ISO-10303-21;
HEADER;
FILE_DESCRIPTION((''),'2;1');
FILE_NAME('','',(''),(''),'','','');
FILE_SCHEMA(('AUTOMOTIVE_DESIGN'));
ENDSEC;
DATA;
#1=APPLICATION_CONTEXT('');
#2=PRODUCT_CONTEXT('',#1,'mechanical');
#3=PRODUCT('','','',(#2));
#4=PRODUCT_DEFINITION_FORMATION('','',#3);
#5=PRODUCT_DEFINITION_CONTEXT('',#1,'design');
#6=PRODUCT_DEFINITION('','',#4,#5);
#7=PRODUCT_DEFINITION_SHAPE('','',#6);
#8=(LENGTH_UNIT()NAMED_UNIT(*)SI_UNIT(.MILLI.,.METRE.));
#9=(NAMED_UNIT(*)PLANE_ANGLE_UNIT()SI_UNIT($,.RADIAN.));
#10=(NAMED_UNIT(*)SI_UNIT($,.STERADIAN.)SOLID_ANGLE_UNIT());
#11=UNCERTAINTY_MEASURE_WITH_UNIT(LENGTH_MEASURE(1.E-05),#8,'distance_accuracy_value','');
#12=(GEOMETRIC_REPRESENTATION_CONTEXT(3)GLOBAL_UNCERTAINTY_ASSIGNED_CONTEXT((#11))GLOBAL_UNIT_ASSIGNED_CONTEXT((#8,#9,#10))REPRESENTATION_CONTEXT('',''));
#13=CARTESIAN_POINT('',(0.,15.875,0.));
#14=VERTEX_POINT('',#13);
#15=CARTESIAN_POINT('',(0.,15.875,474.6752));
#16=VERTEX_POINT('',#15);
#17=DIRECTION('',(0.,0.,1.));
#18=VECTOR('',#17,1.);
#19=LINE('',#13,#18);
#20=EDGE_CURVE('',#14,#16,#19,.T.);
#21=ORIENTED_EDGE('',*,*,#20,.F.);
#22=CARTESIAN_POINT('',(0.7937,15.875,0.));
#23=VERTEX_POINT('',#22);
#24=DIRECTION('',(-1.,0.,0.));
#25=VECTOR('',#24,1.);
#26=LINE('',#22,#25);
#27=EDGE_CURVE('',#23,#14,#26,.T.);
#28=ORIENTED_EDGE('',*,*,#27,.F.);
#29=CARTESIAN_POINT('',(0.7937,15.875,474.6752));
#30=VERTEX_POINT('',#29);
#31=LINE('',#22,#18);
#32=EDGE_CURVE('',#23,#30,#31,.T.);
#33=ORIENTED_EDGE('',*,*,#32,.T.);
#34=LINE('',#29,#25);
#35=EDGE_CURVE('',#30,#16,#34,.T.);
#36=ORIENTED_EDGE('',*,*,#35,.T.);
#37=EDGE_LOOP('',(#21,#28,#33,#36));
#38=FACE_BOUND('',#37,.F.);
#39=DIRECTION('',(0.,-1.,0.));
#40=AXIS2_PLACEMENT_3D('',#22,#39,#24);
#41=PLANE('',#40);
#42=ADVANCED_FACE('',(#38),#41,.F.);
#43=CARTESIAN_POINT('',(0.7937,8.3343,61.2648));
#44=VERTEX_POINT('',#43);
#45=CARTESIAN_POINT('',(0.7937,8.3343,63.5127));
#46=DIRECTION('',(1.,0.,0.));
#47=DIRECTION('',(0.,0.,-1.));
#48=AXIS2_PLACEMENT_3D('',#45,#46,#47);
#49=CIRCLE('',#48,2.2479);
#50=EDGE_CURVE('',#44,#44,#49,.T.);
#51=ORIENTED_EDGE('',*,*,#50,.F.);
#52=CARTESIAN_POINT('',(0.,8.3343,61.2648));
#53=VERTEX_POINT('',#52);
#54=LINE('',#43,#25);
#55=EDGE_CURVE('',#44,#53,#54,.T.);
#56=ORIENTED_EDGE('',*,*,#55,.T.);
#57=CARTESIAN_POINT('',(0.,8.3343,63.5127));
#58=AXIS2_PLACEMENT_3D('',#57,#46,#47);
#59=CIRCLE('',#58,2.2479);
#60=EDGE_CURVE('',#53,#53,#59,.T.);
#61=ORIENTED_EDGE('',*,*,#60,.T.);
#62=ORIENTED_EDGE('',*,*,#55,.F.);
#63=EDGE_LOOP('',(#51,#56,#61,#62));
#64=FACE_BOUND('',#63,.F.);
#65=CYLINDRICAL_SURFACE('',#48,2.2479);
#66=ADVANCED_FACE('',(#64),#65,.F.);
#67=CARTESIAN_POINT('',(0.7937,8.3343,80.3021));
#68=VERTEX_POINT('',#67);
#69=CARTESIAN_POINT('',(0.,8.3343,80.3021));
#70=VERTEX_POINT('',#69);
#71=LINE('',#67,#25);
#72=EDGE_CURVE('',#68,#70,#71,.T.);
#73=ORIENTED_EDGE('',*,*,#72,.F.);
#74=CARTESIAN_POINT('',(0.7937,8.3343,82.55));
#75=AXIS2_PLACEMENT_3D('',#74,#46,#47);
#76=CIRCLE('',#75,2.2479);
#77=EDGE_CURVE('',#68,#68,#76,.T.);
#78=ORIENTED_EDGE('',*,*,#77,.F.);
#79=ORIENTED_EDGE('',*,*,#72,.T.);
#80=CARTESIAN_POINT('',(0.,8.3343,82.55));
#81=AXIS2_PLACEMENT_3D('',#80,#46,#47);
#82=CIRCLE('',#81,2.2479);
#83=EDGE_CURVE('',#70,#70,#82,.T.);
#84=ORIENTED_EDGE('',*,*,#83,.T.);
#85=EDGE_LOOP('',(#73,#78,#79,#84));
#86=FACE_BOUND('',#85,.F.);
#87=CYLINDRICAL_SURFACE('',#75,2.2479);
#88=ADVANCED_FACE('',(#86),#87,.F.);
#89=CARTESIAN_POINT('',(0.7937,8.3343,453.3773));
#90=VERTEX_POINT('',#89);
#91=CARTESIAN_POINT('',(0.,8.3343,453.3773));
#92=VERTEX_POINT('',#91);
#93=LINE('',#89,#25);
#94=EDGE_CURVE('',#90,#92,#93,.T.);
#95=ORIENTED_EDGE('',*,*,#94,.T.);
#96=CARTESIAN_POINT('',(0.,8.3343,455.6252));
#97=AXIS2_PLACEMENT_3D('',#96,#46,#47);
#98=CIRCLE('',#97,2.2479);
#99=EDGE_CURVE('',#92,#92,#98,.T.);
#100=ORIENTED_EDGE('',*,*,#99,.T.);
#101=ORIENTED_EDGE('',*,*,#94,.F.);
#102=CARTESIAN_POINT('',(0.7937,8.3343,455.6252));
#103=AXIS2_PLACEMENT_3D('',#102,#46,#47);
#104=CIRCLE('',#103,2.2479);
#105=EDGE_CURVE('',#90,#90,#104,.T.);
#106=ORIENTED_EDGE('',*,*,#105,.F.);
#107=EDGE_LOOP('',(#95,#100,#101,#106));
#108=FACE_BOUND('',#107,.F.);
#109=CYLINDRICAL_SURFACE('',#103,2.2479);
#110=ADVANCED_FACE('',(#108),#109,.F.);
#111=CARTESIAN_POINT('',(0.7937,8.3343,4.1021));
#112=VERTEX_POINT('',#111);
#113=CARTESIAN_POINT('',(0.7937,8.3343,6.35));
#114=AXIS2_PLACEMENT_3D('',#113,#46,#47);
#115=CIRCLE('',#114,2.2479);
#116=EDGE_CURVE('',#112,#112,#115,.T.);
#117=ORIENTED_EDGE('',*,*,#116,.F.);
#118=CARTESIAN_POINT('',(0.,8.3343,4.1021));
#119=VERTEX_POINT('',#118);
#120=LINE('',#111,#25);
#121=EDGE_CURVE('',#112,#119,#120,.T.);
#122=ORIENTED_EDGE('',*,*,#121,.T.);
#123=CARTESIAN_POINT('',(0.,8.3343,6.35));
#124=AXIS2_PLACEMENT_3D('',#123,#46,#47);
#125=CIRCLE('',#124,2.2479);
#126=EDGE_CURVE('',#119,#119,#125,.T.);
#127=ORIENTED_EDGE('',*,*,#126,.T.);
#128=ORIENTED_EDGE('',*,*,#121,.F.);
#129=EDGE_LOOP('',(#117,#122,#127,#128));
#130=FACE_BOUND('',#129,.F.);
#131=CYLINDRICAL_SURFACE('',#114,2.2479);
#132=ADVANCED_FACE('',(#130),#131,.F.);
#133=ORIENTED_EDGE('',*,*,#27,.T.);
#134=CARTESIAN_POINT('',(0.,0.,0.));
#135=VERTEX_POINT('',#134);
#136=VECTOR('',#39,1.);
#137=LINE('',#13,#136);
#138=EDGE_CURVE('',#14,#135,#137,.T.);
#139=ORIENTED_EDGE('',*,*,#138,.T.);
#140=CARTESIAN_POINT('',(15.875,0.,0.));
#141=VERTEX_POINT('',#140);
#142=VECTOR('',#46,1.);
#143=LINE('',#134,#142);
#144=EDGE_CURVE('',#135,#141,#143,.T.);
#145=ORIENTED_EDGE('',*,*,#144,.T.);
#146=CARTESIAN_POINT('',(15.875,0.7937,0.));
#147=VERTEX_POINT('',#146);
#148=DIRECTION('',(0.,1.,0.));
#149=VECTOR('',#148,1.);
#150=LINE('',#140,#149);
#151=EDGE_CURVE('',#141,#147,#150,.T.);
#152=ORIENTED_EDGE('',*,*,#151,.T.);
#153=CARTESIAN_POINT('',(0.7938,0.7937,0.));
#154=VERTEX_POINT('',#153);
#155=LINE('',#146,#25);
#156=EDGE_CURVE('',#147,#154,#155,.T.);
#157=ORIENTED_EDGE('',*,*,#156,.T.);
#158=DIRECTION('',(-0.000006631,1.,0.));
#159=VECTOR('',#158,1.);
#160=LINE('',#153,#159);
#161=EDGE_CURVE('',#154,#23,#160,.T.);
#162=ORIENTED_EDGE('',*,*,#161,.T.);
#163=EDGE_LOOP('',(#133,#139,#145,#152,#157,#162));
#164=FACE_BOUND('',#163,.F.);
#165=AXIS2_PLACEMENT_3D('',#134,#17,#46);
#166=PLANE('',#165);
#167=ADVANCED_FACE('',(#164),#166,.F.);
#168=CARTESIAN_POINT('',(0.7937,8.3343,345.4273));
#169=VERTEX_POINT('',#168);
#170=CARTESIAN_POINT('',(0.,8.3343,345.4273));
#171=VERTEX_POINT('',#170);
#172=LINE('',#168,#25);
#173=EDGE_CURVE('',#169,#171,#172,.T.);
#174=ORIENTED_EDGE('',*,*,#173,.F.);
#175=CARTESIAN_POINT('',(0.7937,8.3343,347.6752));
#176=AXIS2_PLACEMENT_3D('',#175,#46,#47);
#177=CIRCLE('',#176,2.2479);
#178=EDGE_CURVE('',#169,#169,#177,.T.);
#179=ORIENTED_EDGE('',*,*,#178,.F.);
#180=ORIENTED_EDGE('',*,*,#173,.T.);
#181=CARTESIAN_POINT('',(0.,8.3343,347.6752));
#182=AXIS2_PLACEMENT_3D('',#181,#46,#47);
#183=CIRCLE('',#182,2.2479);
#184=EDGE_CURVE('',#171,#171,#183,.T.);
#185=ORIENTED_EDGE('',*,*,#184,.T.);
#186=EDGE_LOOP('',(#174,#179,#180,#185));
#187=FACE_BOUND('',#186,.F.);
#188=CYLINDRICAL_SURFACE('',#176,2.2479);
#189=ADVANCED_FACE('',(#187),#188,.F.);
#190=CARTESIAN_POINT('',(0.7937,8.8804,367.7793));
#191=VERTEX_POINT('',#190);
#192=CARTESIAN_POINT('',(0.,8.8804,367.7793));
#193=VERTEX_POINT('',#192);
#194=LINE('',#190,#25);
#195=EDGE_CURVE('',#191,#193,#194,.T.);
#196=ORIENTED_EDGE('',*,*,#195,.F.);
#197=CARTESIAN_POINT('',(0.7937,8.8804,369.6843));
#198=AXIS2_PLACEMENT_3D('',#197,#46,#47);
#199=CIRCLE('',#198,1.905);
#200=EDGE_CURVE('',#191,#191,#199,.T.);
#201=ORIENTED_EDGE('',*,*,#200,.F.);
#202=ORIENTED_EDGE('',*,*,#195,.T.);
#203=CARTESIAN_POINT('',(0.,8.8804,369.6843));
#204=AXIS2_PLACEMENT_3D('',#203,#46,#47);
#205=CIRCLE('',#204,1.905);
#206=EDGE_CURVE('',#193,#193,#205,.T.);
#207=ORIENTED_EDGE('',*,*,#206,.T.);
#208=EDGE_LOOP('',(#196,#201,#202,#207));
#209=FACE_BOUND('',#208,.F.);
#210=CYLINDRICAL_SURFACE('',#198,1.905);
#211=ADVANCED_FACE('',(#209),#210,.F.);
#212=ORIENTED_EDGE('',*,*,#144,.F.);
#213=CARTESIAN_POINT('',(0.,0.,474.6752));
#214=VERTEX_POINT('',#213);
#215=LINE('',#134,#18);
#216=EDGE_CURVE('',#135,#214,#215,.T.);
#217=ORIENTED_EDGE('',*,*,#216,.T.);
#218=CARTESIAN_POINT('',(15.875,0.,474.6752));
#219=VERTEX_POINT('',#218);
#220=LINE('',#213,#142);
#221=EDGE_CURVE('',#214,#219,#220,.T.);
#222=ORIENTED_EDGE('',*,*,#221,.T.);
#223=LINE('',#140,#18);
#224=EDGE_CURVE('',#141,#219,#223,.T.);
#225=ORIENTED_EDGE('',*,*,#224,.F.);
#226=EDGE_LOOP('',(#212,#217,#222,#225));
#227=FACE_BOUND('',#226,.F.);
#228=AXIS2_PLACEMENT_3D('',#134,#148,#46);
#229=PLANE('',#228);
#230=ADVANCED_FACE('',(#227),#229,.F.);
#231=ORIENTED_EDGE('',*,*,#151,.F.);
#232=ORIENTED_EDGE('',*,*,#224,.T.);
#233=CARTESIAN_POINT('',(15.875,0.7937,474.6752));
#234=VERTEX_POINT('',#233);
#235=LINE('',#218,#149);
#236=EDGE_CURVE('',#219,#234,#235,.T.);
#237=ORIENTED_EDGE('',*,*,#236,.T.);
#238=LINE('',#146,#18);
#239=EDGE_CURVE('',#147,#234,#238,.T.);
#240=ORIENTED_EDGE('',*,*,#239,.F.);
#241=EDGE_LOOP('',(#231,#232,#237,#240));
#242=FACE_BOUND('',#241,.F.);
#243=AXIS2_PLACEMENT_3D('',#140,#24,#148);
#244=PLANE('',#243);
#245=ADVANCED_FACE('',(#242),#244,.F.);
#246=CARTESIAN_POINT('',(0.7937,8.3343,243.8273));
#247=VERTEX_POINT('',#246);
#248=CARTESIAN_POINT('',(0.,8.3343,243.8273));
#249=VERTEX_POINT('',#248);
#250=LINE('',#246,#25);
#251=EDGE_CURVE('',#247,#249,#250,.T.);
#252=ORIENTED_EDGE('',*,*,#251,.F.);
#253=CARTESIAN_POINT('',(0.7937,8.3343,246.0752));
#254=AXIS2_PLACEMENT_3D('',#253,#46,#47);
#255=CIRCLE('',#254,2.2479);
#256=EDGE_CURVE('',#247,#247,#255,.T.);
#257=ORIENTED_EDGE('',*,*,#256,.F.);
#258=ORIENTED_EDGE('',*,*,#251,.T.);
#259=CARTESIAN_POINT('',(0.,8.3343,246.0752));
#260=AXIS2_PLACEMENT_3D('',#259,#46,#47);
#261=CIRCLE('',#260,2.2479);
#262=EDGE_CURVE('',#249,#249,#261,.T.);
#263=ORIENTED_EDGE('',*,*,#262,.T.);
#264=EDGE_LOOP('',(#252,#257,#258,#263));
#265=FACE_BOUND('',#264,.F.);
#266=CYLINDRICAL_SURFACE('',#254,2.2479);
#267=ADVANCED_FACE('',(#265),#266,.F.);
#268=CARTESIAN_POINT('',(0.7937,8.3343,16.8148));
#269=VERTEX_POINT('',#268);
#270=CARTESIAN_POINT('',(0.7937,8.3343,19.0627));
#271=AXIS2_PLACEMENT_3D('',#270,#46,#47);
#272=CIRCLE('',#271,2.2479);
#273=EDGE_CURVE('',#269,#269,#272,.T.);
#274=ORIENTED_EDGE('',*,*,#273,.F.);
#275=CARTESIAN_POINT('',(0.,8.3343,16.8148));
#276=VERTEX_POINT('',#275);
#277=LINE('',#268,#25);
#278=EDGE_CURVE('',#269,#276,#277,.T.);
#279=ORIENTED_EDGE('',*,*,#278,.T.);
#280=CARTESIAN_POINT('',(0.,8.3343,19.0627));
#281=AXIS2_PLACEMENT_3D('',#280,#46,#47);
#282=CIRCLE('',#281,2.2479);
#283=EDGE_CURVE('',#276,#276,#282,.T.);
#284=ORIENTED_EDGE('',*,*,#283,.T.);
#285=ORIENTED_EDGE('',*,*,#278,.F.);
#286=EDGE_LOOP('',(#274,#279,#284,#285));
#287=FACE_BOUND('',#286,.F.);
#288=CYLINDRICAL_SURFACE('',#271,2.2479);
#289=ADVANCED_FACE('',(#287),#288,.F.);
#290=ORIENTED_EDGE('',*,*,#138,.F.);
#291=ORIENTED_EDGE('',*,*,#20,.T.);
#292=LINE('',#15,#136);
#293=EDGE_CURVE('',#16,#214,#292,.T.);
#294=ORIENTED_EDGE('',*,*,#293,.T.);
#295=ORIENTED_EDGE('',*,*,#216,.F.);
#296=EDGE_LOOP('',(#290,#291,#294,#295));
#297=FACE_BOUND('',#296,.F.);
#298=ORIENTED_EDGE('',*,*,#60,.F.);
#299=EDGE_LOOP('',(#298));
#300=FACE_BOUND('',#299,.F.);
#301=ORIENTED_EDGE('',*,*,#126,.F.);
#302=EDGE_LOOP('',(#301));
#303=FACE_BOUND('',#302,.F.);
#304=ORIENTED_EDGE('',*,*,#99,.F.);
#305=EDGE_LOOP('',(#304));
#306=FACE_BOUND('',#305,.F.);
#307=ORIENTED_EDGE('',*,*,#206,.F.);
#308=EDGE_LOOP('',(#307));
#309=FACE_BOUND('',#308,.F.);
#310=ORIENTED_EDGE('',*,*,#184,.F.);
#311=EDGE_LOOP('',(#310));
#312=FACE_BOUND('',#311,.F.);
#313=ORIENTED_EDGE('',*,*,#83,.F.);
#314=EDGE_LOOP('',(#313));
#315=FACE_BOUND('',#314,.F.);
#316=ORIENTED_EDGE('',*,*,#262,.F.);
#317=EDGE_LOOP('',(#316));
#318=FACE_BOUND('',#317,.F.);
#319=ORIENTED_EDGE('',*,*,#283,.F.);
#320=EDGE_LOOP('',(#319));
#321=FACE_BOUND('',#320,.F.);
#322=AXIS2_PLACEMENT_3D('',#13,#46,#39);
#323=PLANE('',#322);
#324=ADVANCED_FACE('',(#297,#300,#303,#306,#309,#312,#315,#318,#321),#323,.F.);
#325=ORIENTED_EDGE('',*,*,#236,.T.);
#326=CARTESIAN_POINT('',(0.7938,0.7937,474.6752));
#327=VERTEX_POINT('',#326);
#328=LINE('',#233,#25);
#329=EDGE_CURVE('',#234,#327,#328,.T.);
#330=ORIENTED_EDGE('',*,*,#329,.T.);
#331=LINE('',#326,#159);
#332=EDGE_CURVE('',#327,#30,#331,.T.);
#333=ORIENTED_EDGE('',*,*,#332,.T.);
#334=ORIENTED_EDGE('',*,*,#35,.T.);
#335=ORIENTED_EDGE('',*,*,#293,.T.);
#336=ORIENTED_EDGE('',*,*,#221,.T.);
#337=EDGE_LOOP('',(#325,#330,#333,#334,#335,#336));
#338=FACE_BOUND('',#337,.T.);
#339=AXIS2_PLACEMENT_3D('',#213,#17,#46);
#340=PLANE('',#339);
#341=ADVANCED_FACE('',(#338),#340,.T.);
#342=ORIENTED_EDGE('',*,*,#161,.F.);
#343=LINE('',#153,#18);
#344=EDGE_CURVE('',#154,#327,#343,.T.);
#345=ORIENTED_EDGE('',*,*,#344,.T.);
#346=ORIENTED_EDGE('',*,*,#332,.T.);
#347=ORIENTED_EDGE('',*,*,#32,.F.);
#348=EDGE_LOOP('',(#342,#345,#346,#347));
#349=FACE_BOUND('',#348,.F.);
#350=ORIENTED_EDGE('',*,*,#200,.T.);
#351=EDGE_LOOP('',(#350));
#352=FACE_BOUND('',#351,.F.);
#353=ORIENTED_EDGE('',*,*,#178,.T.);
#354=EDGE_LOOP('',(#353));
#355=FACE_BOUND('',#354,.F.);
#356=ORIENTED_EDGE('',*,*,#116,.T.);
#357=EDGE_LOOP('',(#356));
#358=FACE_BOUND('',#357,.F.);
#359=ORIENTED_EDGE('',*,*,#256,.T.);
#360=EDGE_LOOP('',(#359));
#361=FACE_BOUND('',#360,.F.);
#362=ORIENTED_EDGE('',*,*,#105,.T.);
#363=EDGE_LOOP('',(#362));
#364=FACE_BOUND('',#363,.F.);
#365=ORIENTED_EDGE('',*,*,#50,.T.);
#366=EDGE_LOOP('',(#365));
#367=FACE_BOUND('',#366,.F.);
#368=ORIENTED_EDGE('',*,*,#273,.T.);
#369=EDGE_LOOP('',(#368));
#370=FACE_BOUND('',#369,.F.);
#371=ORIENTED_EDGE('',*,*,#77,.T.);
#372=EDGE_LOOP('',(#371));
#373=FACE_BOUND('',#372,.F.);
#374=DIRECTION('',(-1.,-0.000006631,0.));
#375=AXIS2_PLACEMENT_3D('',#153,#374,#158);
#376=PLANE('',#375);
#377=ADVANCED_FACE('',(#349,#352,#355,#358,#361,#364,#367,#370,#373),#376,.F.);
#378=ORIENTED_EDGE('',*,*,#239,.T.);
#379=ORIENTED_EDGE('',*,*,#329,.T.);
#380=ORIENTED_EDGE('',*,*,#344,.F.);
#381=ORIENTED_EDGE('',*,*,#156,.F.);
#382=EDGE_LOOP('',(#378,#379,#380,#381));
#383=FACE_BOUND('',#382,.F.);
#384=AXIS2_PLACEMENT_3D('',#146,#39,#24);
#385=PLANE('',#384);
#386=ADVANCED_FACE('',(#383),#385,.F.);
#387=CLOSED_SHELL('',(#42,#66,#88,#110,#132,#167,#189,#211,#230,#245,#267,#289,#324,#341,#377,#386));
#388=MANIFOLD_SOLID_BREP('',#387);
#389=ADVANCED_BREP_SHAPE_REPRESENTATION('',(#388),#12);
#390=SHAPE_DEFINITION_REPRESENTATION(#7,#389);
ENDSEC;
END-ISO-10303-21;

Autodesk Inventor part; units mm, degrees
ref_plane "YZ Plane" through (0, 0, 0) normal (1, 0, 0) x (0, 1, 0)
ref_plane "XZ Plane" through (0, 0, 0) normal (0, 1, 0) x (-1, 0, 0)
ref_plane "XY Plane" through (0, 0, 0) normal (0, 0, 1) x (1, 0, 0)
sketch "Sketch1" plane through (0, 0, 0) normal (0, 0, 1) x (1, 0, 0)
  line L0 (0, 0) -> (15.875, 0)
  line L1 (15.875, 0) -> (15.875, 0.7937)
  line L2 (15.875, 0.7937) -> (0.7938, 0.7937)
  line L3 (0.7938, 0.7937) -> (0.7937, 15.875)
  line L4 (0.7937, 15.875) -> (0, 15.875)
  line L5 (0, 15.875) -> (0, 0)
  dimension "d0" = 15.875
  dimension "d1" = 0.7937
  dimension "d2" = 0.7937
extrude "Extrusion1" add sketch "Sketch1" along normal blind 474.6752
sketch "Sketch2" plane through (0.7937, 0.7937, 0) normal (1, 0, 0) x (0, 0, -1)
  line L0 (0, 0) -> (0, 15.0812) projected
  line L1 (-474.6752, 0) -> (-474.6752, 15.0812) projected
  circle A0 centre (-19.0627, 7.5406) radius 2.2479 projected
  circle A1 centre (-63.5127, 7.5406) radius 2.2479 projected
  line L2 (0, 7.5406) -> (-474.6752, 7.5406) construction
  circle A2 centre (-6.35, 7.5406) radius 2.2479
  circle A3 centre (-82.55, 7.5406) radius 2.2479
  circle A4 centre (-246.0752, 7.5406) radius 2.2479
  circle A5 centre (-455.6252, 7.5406) radius 2.2479
  circle A6 centre (-347.6752, 7.5406) radius 2.2479
  circle A7 centre (-369.6843, 8.0867) radius 1.905 projected
  point P0 (0, -0.7937)
  dimension "d5" = 4.4958
  dimension "d8" = 19.05
  dimension "d9" = 127
  dimension "d10" = 228.6
  dimension "d11" = 6.35
  dimension "d12" = 82.55
extrude "Extrusion2" cut sketch "Sketch2" against normal through all
properties part number "Electrical Board 1 Bracing L Channel" material "Aluminum 6061"
